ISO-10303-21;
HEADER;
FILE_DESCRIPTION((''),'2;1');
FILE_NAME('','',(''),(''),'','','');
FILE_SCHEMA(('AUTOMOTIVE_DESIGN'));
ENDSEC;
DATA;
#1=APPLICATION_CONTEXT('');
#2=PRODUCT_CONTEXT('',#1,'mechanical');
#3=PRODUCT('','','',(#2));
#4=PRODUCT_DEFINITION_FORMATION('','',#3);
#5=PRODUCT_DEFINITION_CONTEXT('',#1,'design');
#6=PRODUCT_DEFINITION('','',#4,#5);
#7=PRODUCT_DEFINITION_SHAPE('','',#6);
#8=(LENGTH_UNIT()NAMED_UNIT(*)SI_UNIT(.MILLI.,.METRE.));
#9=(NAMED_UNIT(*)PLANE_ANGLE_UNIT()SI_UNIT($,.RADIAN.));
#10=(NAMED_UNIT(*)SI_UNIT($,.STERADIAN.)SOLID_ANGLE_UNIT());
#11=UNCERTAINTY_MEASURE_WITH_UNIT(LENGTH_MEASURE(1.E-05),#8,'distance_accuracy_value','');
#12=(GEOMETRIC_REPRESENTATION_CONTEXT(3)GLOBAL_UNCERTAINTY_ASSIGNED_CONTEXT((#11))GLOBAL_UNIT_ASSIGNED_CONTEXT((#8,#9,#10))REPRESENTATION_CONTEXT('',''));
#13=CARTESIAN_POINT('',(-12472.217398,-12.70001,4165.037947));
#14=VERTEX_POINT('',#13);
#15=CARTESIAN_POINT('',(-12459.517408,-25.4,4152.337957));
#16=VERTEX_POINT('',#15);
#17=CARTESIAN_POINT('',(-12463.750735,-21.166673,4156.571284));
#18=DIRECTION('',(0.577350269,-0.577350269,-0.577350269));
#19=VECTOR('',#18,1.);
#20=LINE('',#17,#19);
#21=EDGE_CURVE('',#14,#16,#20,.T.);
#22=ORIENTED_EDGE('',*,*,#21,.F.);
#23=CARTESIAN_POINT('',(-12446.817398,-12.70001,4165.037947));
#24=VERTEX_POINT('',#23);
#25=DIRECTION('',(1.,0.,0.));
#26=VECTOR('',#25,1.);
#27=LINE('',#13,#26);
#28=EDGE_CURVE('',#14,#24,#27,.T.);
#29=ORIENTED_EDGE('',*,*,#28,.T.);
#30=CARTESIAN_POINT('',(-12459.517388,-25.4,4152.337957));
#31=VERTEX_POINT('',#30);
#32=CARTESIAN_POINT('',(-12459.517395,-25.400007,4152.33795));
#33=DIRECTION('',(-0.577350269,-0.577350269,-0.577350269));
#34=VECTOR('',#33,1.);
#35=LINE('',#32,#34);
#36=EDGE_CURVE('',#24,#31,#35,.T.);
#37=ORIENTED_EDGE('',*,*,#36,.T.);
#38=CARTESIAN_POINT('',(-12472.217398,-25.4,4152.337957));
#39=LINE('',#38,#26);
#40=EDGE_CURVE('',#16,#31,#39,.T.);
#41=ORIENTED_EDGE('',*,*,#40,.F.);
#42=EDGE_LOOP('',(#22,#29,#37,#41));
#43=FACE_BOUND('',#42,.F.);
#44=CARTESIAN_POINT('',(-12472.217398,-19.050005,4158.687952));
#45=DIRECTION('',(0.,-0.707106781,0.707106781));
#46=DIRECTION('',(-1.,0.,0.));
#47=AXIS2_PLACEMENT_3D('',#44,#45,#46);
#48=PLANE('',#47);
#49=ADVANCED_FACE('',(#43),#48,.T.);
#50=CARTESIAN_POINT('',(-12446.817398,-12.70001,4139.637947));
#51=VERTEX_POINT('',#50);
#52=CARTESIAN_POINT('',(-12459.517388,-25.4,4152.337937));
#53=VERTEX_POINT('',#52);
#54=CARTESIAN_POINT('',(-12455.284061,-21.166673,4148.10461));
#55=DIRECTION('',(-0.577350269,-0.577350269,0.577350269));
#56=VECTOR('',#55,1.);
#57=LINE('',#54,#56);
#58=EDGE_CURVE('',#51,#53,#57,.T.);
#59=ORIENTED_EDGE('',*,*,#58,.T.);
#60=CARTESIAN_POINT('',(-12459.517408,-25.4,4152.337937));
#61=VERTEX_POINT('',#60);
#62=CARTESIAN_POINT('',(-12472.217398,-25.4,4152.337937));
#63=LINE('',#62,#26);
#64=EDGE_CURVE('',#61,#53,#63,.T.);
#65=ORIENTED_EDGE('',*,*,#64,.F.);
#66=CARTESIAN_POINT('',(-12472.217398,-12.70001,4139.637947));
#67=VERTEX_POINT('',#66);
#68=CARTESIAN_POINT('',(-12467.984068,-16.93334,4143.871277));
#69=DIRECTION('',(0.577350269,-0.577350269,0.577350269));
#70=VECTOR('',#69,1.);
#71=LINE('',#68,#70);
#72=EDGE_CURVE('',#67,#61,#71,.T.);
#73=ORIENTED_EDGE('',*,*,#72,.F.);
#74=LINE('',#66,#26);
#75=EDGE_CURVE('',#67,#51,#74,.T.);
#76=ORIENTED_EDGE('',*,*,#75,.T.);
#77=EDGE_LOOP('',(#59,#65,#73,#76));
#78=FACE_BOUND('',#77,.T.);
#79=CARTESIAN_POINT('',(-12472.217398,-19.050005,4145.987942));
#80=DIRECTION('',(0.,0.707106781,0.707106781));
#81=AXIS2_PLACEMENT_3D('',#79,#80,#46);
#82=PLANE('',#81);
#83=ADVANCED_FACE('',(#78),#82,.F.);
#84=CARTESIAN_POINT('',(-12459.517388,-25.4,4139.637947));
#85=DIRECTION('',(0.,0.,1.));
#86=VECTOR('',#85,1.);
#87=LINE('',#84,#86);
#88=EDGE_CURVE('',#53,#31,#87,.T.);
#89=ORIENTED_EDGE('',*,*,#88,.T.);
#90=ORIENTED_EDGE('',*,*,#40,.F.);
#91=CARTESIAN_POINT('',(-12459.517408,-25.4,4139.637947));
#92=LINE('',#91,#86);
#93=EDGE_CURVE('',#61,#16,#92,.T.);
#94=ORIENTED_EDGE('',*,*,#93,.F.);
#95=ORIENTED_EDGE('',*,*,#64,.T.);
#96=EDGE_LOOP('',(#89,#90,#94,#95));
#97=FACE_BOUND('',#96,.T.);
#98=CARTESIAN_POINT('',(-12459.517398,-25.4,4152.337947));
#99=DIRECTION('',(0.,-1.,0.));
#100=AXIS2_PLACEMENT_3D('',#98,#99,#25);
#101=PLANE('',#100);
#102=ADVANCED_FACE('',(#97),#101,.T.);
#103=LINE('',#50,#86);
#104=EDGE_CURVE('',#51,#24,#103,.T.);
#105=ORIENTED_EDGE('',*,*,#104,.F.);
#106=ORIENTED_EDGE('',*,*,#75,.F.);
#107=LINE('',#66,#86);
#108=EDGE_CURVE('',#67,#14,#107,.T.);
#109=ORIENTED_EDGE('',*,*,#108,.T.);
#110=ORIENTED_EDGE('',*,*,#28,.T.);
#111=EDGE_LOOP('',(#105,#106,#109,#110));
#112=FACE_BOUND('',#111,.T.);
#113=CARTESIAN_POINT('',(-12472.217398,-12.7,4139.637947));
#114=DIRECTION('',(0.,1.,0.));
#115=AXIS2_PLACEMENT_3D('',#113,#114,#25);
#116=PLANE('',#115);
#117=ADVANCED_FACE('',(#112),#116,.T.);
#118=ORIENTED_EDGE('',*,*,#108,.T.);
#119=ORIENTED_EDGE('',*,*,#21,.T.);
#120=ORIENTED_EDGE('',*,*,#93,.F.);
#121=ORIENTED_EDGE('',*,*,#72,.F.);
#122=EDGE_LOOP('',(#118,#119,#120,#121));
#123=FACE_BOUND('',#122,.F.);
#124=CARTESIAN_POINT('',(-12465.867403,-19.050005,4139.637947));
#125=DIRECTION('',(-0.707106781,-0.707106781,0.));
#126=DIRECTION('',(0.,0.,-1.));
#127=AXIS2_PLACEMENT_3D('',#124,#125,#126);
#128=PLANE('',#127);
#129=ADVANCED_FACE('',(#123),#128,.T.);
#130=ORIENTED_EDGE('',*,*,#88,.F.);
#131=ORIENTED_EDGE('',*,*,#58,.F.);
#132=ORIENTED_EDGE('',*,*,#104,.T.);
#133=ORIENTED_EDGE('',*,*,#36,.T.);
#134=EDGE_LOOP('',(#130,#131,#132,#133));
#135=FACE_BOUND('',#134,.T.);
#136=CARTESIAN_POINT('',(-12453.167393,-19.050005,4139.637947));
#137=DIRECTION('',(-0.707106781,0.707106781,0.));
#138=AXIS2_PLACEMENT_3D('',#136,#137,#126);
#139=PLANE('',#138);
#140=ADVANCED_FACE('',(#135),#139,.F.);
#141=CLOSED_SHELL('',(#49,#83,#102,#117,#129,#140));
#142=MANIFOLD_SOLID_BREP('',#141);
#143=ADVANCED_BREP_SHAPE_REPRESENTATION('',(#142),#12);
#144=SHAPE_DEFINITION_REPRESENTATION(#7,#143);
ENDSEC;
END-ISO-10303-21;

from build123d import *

# Parameters (mm, degrees)
F0_W     = 25.4
F0_H     = 25.4
F1_DEPTH = 25.4
F2_SIZE  = 12.69999
F3_W     = 25.4
F3_H     = 12.7
F4_DEPTH = 25.4


# Not quite as in the source:
# - a fillet or chamfer is up to 0.001 mm smaller than in the source, because OpenCascade refuses the exact size


with BuildPart() as f1:
    # F0 (on Front) → F1 (new body)
    with BuildSketch(Plane.XZ):
        with Locations((-12459.5173980713, 4152.3379470825)):
            Rectangle(F0_W, F0_H)
    extrude(amount=F1_DEPTH)

    # F2 (size 12.7 in the source; OpenCascade refuses exactly that, so slightly less here)
    f2_edges = [f1.edges().sort_by_distance(p)[0] for p in [
        (-12446.817398, -25.4, 4152.337947),
        (-12459.517398, -25.4, 4139.637947),
        (-12472.217398, -25.4, 4152.337947),
        (-12459.517398, -25.4, 4165.037947),
    ]]
    chamfer(f2_edges, length=F2_SIZE)

    # F3 (on face) → F4 (cut)
    with BuildSketch(Plane(origin=(0, 0, 4139.6379470825), x_dir=(1, 0, 0), z_dir=(0, 0, -1))):
        with Locations((-12459.5173980713, 6.35)):
            Rectangle(F3_W, F3_H)
    extrude(amount=-F4_DEPTH, mode=Mode.SUBTRACT)


solid = f1.part
